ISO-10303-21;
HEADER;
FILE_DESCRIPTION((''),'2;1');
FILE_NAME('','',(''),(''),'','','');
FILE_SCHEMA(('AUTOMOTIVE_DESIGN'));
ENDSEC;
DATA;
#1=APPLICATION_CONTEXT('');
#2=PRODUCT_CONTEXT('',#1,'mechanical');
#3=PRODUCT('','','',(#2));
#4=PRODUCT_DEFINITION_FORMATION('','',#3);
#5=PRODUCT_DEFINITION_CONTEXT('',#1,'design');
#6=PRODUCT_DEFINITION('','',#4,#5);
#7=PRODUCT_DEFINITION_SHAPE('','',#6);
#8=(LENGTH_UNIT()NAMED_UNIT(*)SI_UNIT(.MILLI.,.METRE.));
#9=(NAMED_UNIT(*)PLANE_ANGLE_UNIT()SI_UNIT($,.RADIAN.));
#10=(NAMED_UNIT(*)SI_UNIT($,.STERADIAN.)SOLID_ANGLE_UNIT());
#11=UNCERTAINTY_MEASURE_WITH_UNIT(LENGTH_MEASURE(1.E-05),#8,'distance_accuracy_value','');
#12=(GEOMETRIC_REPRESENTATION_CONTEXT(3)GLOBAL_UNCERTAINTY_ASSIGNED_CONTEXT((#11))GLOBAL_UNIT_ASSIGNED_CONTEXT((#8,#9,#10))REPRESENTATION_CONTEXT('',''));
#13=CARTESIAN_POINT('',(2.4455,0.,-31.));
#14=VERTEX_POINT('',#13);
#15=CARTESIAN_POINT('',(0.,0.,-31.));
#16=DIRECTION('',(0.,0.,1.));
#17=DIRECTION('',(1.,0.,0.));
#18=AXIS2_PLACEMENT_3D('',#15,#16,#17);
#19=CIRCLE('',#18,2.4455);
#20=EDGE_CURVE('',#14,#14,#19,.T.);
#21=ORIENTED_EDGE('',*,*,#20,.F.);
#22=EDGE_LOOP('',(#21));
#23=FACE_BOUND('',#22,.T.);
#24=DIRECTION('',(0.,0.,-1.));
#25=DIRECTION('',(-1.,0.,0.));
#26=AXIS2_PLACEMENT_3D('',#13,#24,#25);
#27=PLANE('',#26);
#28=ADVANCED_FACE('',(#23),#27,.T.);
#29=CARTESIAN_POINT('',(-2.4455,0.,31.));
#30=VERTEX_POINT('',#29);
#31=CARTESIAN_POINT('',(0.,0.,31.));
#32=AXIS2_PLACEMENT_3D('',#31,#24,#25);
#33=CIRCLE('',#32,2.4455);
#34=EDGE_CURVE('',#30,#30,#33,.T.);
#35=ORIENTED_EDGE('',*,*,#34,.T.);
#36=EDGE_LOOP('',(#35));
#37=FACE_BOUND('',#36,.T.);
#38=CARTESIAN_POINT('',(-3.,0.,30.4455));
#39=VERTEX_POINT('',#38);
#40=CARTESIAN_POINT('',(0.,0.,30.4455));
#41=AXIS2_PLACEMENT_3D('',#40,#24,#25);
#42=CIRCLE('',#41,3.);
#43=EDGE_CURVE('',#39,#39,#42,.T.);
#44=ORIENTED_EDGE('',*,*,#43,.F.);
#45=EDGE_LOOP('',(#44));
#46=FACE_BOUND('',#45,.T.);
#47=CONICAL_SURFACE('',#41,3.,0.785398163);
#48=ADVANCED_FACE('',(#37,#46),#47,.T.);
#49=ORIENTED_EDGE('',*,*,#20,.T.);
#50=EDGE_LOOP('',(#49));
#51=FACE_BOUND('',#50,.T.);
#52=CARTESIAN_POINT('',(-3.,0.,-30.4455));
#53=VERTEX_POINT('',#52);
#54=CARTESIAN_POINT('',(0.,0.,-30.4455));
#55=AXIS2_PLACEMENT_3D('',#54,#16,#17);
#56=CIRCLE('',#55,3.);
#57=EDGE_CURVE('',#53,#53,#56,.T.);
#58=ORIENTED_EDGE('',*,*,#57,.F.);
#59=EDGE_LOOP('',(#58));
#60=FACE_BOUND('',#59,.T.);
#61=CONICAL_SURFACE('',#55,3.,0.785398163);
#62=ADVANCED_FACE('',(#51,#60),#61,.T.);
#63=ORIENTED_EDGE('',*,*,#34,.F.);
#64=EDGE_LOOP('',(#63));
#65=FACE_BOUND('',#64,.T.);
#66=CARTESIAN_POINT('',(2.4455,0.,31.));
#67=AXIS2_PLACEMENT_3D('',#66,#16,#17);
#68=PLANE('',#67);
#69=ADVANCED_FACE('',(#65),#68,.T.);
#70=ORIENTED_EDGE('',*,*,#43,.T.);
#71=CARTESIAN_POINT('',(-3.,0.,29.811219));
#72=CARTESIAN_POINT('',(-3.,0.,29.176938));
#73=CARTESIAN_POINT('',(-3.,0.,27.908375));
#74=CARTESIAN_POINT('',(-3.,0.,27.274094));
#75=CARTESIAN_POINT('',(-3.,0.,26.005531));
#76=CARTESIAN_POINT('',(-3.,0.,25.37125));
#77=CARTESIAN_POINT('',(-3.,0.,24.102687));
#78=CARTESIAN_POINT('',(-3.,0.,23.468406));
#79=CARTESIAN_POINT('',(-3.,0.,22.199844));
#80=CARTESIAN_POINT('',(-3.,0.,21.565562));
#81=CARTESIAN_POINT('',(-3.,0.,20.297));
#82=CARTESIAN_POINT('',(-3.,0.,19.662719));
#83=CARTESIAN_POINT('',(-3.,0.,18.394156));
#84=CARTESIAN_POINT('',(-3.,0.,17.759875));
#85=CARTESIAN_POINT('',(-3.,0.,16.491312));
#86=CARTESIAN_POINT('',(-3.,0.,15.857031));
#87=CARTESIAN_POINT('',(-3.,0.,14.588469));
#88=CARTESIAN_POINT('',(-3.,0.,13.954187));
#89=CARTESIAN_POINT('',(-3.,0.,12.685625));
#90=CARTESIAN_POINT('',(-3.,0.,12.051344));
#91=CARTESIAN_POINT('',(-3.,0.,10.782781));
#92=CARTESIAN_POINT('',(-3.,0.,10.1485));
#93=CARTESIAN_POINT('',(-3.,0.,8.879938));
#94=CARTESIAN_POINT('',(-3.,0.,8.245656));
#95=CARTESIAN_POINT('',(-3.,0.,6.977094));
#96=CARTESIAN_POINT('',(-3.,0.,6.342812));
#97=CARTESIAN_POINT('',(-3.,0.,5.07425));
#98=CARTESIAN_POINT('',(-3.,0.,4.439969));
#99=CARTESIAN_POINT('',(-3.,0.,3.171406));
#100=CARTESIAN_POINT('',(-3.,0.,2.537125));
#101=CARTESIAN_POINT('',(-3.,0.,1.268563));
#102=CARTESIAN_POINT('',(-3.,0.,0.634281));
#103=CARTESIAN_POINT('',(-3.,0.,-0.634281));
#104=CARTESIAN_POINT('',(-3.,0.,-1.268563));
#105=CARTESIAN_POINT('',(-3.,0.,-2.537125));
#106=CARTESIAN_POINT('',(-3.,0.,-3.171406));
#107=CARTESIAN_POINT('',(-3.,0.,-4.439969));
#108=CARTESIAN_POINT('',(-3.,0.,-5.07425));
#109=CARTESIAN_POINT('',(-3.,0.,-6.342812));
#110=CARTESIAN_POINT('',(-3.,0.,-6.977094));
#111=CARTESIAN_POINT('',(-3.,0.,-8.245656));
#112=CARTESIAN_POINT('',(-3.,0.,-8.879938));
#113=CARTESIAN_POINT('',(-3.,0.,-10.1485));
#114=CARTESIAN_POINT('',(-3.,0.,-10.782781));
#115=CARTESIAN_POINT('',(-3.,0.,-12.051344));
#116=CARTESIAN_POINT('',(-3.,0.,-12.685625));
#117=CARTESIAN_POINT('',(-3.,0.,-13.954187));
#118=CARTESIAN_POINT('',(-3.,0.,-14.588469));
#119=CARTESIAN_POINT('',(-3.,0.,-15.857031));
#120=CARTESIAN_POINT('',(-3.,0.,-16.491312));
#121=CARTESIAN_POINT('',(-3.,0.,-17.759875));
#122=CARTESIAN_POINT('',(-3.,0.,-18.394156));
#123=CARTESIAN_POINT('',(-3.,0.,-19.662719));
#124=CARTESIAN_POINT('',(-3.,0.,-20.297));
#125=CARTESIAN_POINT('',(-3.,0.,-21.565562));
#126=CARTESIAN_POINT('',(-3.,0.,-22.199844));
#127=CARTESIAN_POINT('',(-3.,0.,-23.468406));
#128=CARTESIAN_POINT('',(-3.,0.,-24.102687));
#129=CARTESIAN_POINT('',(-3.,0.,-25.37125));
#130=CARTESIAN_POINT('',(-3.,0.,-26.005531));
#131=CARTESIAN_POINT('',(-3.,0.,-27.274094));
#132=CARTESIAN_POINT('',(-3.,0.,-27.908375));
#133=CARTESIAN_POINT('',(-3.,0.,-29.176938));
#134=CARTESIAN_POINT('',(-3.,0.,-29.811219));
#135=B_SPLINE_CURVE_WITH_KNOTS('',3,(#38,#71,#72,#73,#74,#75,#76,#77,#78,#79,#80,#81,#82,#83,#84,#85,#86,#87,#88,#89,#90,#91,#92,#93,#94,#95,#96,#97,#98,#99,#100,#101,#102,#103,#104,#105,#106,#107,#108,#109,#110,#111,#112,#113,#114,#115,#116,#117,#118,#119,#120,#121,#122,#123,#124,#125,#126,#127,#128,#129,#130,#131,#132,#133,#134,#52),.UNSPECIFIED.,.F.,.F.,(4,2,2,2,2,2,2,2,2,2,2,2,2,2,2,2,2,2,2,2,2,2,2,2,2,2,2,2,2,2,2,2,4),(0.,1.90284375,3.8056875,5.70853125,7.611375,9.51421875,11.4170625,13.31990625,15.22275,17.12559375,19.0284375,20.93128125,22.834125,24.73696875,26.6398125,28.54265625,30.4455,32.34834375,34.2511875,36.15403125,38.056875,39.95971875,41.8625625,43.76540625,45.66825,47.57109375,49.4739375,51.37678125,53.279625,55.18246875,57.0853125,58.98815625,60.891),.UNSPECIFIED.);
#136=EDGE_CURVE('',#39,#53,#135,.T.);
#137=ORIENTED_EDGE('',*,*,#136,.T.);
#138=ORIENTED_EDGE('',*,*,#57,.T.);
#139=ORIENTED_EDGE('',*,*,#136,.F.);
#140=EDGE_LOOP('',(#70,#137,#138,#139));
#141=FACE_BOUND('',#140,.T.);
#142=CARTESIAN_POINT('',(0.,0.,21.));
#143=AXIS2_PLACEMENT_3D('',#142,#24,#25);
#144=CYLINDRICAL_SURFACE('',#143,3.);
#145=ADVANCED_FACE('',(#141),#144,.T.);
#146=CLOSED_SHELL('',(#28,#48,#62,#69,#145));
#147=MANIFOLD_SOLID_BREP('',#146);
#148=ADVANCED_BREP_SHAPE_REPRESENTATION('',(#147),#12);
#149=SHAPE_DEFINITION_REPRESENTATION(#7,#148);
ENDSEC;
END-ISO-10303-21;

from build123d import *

# Parameters (mm, degrees)
SKETCH1_R           = 3
BOSS_EXTRUDE1_DEPTH = 21


# Read off the part's stored shape, not the designer's step: M6x1.0 Machine Threads Stud1
with BuildPart() as part:
    # Sketch1 → Boss-Extrude1 (new, symmetric)
    with BuildSketch(Plane.XY):
        with Locations(Location((0, 0, 0), (0, 0, 180))):
            Circle(SKETCH1_R)
    extrude(amount=BOSS_EXTRUDE1_DEPTH, both=True)

    # M6x1.0 Machine Threads Stud1 outline → M6x1.0 Machine Threads Stud1 (revolve)
    with BuildSketch(Plane.XZ):
        Polygon((3, 21), (3, 30.4455), (2.4455, 31), (0, 31), (0, 21), align=None)
    m6x1_0_machine_threads_stud1 = revolve(axis=Axis((0, 0, 0), (0, 0, 1)))

    # Mirror1: M6x1.0 Machine Threads Stud1 across plane
    add(m6x1_0_machine_threads_stud1.mirror(Plane.XY))


solid = part.part
